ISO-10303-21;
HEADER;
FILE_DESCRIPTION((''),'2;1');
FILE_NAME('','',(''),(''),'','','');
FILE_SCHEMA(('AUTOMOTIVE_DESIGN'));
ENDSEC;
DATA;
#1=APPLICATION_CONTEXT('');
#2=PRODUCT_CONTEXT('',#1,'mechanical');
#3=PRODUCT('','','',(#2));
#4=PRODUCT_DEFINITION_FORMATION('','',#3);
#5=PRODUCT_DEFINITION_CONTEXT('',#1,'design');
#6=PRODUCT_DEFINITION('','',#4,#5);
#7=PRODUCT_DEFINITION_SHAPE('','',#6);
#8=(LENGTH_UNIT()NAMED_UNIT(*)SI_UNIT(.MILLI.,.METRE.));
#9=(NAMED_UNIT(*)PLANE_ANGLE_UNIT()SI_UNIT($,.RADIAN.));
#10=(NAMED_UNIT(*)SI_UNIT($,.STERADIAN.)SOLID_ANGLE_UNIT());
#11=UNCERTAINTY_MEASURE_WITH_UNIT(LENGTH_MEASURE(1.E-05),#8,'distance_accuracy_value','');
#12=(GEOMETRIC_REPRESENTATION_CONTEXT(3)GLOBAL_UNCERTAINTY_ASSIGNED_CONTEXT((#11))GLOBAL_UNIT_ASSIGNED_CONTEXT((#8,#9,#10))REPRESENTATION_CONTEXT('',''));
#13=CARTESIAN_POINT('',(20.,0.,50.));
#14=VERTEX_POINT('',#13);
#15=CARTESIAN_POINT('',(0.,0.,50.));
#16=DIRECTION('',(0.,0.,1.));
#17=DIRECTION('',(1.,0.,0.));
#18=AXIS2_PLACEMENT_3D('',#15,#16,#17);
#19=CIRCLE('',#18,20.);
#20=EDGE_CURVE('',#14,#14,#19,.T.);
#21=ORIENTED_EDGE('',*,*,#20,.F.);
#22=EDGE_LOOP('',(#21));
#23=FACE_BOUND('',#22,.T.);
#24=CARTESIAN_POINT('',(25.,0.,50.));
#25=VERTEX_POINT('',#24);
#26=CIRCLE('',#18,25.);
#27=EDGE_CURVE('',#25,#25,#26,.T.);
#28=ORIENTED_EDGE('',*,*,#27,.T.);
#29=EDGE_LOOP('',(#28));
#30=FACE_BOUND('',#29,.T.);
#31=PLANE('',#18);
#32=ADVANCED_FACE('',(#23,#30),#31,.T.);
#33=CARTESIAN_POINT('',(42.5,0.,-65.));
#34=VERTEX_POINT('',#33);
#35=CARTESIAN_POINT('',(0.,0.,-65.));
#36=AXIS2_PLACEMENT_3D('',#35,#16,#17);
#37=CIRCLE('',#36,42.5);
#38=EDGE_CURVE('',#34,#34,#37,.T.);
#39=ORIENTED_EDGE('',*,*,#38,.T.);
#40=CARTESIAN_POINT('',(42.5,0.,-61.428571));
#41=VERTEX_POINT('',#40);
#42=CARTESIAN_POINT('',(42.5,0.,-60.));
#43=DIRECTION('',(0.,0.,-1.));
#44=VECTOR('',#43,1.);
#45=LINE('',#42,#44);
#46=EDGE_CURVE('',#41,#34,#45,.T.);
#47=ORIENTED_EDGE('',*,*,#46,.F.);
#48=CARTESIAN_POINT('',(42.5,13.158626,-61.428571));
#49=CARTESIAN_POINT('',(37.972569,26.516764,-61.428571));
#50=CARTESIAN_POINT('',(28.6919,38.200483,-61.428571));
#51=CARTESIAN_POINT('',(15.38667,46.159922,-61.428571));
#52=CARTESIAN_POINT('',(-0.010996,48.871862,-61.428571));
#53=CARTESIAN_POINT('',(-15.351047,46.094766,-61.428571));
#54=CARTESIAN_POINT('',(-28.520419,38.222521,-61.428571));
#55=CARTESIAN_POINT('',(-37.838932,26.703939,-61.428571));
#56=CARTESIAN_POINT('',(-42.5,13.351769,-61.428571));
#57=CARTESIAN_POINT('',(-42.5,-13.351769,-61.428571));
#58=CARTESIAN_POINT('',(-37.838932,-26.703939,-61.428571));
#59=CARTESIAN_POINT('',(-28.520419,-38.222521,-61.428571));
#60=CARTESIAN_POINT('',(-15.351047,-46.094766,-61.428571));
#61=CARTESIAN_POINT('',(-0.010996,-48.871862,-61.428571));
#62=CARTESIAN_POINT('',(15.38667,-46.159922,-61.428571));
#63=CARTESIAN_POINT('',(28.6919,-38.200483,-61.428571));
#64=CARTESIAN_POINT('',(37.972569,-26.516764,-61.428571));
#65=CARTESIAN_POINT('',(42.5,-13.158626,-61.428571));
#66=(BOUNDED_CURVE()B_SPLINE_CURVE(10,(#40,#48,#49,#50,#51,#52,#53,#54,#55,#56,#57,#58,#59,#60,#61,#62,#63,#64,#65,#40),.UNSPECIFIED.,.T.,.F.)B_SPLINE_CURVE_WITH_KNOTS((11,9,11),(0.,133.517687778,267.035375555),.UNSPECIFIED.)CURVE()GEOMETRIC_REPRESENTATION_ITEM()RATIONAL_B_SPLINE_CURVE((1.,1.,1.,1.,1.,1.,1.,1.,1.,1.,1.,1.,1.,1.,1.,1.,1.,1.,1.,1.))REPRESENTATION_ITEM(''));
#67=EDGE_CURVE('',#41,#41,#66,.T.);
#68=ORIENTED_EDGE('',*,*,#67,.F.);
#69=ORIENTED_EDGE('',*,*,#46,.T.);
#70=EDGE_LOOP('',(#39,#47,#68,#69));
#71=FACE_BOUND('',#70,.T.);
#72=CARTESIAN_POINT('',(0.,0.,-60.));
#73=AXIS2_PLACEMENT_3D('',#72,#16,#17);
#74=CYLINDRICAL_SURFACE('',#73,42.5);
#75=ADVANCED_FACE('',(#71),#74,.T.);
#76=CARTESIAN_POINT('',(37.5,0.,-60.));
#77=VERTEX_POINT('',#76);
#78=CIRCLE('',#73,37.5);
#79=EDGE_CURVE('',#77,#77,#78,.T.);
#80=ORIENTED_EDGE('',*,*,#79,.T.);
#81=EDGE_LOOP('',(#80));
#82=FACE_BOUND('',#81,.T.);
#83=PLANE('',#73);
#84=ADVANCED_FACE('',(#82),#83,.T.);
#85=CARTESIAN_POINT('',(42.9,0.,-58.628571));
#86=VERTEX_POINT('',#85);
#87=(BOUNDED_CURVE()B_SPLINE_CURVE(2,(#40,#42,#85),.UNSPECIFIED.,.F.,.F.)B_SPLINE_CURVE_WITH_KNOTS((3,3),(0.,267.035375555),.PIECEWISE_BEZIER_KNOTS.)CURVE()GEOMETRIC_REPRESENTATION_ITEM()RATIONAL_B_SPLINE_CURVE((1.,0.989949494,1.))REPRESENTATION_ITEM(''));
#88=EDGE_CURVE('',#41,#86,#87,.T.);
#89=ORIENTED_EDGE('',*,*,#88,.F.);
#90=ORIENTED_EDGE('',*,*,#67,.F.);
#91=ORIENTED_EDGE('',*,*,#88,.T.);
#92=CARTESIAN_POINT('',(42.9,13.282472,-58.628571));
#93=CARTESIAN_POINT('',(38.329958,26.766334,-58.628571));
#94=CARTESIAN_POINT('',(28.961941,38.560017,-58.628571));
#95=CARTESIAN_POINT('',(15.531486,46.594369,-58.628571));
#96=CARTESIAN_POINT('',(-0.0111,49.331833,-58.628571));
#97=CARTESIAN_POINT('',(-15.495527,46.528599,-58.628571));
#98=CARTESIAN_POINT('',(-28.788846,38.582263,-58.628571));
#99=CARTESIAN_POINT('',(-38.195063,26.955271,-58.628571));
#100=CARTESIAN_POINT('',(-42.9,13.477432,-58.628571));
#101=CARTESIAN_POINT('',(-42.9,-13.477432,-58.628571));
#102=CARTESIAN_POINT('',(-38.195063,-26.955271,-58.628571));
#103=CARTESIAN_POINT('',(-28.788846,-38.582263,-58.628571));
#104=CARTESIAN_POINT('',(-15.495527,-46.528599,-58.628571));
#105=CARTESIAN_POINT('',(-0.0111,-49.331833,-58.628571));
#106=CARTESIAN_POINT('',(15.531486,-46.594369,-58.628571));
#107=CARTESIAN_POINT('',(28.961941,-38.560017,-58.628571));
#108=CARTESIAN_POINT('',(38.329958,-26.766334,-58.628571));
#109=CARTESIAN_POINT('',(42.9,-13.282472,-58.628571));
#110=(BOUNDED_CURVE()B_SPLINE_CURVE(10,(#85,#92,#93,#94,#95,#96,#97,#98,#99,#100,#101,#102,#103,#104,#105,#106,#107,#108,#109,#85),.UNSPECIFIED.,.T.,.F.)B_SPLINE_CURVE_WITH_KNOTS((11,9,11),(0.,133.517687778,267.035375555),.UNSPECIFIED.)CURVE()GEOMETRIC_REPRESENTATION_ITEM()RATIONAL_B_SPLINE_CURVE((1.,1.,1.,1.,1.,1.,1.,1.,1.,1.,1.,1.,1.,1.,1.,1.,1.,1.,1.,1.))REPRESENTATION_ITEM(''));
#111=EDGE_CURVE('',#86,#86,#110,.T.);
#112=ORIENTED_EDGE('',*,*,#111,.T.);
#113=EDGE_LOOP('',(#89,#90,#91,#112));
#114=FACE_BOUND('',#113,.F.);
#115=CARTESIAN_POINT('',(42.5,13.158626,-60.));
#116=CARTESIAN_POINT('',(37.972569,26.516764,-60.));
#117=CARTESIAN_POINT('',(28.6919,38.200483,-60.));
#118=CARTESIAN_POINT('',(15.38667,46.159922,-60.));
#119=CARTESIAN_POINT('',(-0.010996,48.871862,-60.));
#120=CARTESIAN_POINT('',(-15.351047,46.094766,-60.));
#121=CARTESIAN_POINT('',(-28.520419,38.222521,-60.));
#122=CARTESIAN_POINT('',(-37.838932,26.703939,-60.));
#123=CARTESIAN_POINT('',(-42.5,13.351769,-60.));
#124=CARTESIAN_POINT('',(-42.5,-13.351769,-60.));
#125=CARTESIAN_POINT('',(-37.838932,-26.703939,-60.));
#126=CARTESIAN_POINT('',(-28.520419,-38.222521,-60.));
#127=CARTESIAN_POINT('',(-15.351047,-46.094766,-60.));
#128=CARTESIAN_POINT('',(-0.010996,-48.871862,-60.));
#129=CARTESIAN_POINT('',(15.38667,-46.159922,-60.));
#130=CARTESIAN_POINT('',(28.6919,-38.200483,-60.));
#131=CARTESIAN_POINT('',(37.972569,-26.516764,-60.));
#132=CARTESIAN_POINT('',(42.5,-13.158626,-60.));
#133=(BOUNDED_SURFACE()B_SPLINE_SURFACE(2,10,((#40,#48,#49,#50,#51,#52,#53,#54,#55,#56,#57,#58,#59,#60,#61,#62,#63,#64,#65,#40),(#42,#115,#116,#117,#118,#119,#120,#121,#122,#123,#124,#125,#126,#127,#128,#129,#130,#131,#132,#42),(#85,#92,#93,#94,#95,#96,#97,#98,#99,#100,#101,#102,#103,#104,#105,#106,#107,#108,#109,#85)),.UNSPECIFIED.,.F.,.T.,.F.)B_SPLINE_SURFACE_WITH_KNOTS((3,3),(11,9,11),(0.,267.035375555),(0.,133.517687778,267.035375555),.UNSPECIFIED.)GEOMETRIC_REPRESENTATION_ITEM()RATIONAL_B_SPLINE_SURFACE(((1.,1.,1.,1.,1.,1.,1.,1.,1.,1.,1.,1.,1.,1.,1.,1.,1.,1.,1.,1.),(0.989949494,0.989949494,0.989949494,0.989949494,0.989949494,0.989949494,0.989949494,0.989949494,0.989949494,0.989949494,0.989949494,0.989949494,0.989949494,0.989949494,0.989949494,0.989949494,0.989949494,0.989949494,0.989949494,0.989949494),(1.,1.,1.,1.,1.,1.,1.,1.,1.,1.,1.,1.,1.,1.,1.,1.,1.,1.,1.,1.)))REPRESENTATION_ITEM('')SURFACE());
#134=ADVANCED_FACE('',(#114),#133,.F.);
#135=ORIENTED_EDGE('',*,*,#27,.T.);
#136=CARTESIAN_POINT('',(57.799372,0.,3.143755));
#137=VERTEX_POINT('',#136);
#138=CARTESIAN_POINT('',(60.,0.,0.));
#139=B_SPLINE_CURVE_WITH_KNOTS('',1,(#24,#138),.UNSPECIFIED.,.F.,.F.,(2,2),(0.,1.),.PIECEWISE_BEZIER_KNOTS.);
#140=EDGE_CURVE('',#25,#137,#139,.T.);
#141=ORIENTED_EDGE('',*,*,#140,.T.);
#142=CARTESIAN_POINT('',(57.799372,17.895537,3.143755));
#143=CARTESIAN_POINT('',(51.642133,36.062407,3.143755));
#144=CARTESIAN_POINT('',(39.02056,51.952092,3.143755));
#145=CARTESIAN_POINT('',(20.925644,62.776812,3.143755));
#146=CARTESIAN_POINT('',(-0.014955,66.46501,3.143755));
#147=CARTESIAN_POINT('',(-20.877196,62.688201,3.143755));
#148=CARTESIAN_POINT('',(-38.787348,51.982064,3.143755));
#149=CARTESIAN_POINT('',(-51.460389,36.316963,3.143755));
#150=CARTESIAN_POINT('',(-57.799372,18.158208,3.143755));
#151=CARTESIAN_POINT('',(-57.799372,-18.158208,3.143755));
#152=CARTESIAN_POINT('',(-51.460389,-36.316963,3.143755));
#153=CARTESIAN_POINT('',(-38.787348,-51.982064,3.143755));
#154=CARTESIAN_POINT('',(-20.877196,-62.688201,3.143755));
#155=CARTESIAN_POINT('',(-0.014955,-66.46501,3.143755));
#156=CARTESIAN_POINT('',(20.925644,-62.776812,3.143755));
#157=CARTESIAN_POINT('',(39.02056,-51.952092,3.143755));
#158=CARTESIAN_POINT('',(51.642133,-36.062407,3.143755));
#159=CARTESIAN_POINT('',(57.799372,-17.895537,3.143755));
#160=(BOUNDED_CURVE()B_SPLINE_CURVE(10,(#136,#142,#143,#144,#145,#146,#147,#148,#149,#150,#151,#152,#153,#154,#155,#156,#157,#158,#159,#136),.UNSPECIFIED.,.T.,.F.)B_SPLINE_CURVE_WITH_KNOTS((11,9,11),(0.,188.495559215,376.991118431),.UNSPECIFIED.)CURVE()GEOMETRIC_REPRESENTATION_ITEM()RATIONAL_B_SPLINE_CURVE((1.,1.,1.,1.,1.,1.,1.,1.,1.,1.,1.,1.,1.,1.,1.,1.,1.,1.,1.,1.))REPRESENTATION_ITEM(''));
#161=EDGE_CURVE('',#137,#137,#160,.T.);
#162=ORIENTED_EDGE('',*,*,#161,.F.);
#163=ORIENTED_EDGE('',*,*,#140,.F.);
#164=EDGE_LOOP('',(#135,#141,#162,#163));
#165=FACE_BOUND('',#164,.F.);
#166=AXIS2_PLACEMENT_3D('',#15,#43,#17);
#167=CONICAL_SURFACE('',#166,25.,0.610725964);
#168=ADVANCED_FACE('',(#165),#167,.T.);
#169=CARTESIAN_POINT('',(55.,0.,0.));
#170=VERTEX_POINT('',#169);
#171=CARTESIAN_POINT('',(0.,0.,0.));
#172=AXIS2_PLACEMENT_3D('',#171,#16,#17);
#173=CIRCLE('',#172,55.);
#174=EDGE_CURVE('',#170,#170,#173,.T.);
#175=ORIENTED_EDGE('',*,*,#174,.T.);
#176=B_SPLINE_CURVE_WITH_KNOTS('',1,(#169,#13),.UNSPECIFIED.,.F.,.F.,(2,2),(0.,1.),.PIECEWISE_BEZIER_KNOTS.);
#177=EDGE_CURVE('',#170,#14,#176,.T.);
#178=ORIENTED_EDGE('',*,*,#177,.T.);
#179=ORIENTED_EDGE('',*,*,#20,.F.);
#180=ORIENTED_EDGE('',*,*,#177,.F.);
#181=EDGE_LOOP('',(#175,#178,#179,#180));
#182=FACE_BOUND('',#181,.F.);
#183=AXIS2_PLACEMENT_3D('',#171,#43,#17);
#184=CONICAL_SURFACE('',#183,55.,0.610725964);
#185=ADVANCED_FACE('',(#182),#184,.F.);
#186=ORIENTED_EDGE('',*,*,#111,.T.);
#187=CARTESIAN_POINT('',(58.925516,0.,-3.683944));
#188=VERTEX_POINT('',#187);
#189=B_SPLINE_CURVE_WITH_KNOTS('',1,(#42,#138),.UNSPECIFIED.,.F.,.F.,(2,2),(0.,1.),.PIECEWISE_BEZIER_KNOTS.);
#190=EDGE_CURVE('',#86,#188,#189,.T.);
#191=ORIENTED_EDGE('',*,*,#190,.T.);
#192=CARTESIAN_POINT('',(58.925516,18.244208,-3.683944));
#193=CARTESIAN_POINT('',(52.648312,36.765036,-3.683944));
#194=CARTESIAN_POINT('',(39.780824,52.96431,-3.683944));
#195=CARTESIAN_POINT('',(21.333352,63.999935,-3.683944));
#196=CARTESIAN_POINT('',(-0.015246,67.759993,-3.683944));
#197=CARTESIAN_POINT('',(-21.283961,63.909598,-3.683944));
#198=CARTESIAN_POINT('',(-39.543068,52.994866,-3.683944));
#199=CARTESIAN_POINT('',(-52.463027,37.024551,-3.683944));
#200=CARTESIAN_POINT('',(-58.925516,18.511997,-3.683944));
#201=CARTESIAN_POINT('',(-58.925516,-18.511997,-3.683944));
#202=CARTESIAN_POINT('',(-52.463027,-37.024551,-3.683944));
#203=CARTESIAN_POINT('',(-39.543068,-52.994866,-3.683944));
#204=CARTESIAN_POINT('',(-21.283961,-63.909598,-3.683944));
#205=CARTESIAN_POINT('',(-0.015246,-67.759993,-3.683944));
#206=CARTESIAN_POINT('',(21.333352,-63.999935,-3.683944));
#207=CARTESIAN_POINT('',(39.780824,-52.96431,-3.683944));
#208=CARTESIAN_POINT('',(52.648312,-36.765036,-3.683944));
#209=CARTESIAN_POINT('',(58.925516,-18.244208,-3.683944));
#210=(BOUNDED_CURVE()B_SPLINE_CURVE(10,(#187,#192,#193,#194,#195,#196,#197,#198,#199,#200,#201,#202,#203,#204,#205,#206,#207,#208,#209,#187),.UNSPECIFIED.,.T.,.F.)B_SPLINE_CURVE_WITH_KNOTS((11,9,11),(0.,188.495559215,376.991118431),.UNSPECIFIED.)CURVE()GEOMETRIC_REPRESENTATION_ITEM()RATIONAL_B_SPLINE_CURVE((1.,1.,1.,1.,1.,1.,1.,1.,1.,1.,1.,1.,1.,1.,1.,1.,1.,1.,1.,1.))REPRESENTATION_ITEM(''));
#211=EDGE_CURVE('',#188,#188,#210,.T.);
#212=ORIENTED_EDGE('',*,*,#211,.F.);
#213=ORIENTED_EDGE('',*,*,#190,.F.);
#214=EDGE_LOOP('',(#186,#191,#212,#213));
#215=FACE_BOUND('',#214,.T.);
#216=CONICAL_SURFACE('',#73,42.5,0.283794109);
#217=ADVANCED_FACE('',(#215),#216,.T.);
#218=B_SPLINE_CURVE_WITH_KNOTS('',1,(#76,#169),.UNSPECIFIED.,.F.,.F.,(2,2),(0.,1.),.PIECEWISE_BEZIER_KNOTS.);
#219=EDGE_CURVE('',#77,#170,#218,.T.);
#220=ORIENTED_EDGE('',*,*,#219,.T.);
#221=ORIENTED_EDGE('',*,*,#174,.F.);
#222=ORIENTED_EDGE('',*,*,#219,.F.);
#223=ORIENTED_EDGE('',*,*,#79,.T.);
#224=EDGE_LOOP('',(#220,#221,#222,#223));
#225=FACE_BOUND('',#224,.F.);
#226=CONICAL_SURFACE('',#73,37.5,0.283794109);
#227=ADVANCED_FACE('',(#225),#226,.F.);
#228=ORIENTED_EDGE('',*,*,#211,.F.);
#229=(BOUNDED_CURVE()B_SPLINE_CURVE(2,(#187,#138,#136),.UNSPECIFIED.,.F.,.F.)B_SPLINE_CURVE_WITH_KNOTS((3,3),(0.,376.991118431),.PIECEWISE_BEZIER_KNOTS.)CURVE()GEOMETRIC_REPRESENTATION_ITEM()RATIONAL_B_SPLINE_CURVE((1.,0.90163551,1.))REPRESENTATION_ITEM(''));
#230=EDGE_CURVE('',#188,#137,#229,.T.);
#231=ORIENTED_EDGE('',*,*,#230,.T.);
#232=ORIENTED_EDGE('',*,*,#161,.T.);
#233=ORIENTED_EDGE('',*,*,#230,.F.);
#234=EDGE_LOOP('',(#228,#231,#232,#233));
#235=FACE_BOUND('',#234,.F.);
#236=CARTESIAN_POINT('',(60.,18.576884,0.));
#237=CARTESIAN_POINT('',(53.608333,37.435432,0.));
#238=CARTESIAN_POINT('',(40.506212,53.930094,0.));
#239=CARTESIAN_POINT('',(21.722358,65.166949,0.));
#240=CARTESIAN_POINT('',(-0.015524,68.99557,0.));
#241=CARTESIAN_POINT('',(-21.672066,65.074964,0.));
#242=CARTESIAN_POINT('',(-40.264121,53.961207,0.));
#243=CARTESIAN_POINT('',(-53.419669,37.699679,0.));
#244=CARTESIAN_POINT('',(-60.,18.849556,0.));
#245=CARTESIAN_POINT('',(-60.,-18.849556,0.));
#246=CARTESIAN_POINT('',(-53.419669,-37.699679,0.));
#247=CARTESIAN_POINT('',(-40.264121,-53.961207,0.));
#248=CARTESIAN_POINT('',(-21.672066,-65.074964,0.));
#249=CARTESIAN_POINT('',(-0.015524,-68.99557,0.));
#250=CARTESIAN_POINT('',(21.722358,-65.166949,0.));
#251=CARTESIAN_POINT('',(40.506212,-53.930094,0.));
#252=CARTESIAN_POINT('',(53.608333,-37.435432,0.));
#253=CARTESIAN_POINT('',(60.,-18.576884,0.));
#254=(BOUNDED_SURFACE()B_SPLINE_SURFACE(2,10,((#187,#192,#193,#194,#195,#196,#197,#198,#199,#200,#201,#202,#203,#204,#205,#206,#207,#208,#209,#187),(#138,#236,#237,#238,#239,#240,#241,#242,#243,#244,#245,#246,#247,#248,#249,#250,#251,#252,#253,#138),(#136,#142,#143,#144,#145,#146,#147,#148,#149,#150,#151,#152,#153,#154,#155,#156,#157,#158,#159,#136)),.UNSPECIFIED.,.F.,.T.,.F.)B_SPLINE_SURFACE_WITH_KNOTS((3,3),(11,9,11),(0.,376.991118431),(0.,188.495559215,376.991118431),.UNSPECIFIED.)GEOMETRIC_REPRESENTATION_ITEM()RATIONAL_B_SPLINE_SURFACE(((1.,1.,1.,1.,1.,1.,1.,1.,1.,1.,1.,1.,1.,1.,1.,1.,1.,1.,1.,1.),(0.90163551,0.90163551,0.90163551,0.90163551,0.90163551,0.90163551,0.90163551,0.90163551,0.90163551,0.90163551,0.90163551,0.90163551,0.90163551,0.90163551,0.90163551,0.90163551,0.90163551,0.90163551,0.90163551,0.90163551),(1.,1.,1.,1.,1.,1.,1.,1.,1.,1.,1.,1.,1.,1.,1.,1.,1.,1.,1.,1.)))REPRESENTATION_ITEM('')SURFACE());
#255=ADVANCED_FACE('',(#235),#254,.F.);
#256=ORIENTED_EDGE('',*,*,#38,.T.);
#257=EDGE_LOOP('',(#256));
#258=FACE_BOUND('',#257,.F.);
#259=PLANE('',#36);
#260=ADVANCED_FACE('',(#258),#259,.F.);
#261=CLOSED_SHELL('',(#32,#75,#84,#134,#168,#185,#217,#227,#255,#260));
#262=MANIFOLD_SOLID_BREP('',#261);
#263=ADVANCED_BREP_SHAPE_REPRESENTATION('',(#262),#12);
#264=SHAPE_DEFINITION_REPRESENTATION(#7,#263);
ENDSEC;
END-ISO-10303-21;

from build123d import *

# Parameters (mm, degrees)
F2_R      = 25
F1_R      = 60
F5_R      = 42.5
F3_FACE_R = 60
F9_R      = 55
F7_R      = 20
F8_R      = 37.5
F12_R     = 8
F13_R     = 42.5
F14_DEPTH = 5
F15_R     = 10


with BuildPart() as f3:
    # F2 (on offset) → F3 section 0
    with BuildSketch(Plane.XY.offset(50)):
        Circle(F2_R)
    # F1 (on Top) → F3 section 1
    with BuildSketch(Plane.XY):
        Circle(F1_R)
    loft()

    # F5 (on offset) → F6 section 0
    with BuildSketch(Plane.XY.offset(-60)):
        Circle(F5_R)
    # F3_face (on face) → F6 section 1
    with BuildSketch(Plane(origin=(0, 0, 0), x_dir=(1, 0, 0), z_dir=(0, 0, -1))):
        Circle(F3_FACE_R)
    loft()

    # F9 (on Top) → F10 section 0
    with BuildSketch(Plane.XY):
        Circle(F9_R)
    # F7 (on offset) → F10 section 1
    with BuildSketch(Plane.XY.offset(50)):
        Circle(F7_R)
    loft(mode=Mode.SUBTRACT)

    # F8 (on offset) → F11 section 0
    with BuildSketch(Plane.XY.offset(-60)):
        Circle(F8_R)
    # F9 (on Top) → F11 section 1
    with BuildSketch(Plane.XY):
        Circle(F9_R)
    loft(mode=Mode.SUBTRACT)

    # F12
    f12_edges = [f3.edges().sort_by_distance(p)[0] for p in [
        (-60, 0, 0),
    ]]
    fillet(f12_edges, radius=F12_R)

    # F13 (on offset) → F14 (join)
    with BuildSketch(Plane.XY.offset(-60)):
        Circle(F13_R)
    extrude(amount=-F14_DEPTH)

    # F15
    f15_edges = [f3.edges().sort_by_distance(p)[0] for p in [
        (-42.5, 0, -60),
    ]]
    fillet(f15_edges, radius=F15_R)


solid = f3.part
